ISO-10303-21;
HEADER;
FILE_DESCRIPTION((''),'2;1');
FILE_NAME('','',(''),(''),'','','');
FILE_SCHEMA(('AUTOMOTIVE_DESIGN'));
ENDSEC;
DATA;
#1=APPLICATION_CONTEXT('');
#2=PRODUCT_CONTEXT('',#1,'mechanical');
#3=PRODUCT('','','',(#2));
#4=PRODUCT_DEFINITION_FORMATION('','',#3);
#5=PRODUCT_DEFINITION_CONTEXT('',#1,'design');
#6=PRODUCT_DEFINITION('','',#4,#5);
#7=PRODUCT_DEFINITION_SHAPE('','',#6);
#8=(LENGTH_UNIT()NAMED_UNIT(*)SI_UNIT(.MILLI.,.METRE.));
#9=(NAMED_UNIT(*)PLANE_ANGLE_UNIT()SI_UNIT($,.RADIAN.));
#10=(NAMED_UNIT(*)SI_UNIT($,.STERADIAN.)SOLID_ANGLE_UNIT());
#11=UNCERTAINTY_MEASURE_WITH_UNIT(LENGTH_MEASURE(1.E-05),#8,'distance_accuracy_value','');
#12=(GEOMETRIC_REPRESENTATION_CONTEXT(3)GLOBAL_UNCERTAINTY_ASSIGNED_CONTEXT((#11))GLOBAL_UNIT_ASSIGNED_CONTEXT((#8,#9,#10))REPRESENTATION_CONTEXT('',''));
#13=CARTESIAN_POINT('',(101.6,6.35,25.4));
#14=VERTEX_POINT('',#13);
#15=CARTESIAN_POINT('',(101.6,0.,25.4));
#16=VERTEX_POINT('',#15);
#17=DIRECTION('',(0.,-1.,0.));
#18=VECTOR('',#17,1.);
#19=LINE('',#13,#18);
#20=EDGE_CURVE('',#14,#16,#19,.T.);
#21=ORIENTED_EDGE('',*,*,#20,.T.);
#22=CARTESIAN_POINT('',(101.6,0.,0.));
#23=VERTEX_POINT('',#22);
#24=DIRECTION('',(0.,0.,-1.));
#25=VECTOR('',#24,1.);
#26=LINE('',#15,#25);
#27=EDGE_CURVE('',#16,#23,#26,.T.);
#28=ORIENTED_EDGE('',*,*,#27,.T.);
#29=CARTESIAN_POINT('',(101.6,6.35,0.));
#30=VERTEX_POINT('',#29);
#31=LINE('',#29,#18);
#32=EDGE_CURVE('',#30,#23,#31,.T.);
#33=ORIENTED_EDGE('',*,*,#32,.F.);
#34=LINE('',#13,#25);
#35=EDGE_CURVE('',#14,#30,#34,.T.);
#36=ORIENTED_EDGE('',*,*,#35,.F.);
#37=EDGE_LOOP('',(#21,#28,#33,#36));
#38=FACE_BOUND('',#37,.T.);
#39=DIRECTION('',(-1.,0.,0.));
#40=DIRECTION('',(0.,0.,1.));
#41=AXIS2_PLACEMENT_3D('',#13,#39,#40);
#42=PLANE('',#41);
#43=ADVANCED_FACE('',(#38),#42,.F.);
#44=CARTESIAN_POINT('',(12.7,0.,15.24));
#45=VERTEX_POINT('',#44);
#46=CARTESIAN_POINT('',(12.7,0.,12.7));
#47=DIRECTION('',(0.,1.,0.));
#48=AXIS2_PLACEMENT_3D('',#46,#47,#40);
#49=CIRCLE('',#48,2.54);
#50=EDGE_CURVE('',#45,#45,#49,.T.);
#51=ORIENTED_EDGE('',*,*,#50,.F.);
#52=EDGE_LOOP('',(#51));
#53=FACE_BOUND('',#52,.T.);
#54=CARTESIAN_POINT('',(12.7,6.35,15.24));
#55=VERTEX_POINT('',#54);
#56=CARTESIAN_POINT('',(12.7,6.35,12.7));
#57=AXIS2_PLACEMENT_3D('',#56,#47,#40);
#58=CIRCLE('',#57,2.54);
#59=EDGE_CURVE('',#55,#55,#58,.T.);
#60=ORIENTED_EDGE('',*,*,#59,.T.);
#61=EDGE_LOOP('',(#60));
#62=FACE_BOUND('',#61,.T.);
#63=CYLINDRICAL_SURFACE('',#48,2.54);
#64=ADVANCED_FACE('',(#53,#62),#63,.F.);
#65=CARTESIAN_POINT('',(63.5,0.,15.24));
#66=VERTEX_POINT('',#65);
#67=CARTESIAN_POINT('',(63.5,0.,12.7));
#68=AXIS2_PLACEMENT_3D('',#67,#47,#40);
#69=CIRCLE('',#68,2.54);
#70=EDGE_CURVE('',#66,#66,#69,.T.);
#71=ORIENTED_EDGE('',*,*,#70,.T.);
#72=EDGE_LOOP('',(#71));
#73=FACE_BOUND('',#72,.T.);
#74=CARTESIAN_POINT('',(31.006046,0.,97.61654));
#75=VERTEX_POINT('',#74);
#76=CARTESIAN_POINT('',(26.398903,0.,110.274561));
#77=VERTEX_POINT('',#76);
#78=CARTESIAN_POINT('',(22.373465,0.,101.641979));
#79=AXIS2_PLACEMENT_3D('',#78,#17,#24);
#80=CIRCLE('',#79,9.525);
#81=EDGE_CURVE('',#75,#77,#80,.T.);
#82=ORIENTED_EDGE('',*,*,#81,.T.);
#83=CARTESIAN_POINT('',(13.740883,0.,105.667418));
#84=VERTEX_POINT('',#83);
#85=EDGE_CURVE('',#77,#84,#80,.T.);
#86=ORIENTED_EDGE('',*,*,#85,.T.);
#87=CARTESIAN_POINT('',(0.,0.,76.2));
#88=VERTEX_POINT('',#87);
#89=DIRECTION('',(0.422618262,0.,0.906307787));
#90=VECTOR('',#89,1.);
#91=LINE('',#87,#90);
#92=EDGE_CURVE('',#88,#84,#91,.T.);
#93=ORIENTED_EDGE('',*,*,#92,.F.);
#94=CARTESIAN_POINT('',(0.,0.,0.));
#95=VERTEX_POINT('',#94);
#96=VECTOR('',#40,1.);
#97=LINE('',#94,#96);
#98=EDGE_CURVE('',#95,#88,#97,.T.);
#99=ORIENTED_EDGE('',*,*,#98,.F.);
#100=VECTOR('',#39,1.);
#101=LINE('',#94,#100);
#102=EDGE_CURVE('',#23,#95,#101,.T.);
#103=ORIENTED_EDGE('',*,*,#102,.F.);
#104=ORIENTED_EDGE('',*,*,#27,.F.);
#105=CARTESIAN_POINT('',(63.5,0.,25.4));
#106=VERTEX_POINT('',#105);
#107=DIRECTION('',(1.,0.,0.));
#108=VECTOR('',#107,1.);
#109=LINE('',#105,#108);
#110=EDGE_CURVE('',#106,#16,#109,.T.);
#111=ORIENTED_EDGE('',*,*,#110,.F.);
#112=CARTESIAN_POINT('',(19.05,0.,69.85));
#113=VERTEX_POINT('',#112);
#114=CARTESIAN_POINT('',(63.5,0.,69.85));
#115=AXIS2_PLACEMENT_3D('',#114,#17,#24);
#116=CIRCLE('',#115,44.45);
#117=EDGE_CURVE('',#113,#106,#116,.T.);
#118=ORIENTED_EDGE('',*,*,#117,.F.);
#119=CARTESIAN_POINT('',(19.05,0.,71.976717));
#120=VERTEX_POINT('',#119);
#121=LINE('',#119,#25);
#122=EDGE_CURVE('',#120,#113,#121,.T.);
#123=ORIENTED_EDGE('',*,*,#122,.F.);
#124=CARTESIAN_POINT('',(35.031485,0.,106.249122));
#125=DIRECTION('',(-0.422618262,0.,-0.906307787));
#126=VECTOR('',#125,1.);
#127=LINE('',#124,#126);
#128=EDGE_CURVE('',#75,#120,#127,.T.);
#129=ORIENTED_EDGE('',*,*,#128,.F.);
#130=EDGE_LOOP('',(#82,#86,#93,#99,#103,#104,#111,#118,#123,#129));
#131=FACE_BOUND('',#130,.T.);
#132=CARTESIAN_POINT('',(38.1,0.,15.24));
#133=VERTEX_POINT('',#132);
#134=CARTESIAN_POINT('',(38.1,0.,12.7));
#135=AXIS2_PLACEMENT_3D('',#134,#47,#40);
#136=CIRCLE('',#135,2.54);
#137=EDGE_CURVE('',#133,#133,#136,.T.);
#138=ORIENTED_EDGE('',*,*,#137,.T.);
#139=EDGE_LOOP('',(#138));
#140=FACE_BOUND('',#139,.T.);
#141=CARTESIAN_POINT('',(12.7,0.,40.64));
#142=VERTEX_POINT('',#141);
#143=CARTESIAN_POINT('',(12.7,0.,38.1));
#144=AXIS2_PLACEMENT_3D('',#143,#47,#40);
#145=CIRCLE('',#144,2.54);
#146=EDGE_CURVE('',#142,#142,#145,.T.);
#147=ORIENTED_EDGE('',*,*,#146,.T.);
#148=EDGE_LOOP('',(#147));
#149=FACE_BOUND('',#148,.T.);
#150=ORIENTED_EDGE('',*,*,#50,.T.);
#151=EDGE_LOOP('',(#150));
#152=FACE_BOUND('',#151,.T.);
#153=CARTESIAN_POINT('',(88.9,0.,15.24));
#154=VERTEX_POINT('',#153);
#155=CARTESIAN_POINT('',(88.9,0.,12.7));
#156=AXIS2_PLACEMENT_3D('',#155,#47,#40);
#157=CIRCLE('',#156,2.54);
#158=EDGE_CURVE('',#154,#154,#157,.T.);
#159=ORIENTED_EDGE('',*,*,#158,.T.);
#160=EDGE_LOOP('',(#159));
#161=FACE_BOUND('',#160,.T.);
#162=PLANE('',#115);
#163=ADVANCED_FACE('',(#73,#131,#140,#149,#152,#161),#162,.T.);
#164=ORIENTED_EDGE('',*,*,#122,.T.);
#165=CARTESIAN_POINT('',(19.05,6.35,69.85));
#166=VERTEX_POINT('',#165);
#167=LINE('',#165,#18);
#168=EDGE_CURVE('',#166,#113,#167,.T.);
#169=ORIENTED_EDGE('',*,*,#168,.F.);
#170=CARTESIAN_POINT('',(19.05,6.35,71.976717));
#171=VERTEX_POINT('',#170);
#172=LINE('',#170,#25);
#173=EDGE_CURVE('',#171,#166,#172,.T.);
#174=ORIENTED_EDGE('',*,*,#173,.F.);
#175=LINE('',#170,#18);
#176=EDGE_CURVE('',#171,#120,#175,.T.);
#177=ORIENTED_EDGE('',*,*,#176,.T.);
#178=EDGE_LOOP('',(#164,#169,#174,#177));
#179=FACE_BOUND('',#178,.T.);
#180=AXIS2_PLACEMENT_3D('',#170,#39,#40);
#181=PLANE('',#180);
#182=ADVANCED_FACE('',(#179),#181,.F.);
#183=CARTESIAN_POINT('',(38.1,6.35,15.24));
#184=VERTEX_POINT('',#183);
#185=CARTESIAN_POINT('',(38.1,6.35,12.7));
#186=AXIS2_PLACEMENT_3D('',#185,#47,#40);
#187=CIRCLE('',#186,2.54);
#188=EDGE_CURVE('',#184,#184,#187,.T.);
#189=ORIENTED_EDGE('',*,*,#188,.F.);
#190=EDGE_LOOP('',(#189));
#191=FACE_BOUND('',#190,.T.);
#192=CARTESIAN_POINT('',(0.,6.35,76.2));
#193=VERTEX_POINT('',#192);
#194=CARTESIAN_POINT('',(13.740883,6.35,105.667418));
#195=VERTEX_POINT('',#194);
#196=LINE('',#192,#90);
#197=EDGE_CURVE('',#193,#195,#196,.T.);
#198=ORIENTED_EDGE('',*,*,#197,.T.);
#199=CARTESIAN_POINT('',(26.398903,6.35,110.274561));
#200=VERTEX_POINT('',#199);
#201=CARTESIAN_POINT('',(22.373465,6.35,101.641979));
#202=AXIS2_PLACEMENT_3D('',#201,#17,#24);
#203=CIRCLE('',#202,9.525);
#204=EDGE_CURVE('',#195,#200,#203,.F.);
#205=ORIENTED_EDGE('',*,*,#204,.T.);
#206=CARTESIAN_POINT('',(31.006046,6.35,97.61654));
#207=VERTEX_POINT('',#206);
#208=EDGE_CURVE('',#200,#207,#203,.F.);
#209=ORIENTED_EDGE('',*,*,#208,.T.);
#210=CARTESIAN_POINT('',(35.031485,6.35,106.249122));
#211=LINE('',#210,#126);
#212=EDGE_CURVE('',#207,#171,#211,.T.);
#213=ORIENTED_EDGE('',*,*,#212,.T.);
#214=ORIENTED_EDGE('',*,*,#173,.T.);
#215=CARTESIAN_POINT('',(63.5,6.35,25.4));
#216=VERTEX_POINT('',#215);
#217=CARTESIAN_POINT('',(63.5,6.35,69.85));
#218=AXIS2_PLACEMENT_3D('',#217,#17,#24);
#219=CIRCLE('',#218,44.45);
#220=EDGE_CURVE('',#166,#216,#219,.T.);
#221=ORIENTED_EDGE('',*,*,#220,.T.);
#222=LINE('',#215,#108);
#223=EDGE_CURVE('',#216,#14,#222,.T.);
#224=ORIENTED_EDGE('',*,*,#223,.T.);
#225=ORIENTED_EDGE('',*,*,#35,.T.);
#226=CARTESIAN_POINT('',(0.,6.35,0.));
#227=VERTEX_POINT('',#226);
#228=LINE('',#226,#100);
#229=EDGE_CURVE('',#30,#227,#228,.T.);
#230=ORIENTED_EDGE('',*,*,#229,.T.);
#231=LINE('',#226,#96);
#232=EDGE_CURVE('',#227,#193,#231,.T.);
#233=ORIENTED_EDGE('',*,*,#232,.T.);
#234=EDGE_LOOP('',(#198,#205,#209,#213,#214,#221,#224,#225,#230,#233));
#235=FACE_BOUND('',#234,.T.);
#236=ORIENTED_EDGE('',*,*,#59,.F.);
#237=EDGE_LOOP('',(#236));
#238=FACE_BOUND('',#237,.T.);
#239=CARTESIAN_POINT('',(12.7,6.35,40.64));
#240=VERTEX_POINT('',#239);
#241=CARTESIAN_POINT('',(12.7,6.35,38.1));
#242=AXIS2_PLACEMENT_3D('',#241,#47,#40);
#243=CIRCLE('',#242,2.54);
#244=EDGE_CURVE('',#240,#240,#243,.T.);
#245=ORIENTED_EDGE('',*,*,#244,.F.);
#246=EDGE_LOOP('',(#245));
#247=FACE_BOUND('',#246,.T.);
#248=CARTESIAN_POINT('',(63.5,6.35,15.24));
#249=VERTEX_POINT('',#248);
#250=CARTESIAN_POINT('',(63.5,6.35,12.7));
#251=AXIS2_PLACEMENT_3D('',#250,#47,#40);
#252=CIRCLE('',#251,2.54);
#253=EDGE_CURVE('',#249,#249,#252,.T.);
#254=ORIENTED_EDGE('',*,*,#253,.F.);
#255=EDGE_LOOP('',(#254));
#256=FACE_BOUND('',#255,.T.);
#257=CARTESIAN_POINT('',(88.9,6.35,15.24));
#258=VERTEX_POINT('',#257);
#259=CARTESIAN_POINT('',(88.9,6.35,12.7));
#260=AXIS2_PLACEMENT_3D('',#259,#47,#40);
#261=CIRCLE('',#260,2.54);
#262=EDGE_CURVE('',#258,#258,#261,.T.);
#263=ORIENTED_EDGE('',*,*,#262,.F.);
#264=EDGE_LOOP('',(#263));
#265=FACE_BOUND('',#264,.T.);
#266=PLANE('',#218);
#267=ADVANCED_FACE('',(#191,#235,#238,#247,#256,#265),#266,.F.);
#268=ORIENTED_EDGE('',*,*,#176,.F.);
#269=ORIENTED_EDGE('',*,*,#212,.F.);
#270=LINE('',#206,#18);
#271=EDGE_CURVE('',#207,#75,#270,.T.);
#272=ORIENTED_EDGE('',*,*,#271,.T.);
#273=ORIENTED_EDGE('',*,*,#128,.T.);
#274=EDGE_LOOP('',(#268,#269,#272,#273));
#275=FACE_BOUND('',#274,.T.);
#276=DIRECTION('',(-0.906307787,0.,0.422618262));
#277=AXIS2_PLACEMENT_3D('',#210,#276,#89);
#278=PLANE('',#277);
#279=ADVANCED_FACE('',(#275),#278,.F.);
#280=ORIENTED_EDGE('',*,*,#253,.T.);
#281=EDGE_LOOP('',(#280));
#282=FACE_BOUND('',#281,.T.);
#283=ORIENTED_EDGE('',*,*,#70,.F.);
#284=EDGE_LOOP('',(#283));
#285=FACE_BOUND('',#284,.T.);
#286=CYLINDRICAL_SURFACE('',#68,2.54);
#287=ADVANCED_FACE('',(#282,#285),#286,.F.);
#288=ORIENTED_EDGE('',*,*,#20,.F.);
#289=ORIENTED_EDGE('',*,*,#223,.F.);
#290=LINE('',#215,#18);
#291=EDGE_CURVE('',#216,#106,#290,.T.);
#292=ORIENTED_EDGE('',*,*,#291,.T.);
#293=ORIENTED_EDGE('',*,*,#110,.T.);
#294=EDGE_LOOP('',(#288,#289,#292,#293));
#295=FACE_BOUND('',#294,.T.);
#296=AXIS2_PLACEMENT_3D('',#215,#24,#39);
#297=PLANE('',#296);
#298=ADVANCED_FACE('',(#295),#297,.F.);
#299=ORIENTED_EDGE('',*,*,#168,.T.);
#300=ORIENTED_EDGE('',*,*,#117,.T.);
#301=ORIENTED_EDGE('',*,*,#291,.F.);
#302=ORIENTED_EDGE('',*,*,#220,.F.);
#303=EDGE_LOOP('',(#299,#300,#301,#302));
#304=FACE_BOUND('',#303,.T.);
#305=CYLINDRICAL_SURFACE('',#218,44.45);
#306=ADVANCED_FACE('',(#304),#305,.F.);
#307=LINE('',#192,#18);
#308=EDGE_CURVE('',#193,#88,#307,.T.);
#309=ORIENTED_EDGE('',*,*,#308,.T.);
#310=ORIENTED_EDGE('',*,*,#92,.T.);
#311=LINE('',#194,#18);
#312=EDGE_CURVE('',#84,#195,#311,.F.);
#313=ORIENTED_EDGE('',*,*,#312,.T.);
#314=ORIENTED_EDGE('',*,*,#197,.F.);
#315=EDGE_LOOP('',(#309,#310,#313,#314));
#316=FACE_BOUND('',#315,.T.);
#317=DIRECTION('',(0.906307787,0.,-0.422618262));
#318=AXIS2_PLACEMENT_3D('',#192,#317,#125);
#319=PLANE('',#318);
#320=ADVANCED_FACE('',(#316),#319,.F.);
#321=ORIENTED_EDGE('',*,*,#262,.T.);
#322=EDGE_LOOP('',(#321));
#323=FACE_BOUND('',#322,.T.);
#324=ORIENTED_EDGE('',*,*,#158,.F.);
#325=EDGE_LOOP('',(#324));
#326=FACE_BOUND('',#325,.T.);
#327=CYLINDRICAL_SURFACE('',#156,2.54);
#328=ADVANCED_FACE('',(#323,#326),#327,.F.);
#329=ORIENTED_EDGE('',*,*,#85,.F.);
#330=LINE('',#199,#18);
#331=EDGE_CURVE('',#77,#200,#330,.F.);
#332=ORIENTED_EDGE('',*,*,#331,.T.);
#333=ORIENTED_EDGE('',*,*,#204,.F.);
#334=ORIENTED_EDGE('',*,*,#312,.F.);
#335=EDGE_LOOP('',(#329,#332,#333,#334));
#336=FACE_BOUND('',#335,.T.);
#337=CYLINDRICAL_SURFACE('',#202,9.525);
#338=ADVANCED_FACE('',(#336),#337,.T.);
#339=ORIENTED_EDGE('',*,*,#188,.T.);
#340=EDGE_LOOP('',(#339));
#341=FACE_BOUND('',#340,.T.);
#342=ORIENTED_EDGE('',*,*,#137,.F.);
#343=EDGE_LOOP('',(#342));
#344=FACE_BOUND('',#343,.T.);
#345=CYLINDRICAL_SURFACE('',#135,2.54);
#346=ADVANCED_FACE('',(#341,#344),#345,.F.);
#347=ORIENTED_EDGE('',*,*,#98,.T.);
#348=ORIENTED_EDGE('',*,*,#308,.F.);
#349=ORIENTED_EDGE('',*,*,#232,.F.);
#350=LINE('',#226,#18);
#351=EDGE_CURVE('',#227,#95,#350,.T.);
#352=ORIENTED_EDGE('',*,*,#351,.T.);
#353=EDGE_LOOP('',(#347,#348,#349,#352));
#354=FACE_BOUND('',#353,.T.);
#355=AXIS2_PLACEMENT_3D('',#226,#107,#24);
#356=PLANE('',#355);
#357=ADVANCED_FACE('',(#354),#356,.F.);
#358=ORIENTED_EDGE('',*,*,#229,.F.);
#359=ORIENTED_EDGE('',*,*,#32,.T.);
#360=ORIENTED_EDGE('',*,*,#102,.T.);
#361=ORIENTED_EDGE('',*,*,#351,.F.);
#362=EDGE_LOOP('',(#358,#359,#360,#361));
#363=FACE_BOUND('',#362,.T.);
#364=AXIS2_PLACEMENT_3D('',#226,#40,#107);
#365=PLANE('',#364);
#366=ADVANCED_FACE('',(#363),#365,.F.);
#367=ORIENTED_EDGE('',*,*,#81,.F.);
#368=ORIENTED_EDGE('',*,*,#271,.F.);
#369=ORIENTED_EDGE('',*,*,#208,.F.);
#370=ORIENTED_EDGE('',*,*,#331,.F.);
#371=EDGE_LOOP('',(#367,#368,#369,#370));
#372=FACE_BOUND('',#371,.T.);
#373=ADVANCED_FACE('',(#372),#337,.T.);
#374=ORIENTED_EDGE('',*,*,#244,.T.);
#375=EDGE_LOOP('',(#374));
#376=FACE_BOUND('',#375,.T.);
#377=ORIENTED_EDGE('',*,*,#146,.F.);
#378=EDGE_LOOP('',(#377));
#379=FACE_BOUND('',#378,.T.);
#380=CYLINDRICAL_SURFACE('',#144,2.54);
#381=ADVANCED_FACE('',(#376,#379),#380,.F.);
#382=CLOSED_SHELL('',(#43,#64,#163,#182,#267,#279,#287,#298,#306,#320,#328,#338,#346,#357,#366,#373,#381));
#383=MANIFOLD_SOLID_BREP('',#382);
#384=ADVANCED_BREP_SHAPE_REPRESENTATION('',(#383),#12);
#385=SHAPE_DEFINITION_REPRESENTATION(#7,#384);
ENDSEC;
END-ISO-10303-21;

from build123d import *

# Parameters (mm, degrees)
BOSS_EXTRUDE1_DEPTH = 6.35
SKETCH2_R           = 2.54
CUT_EXTRUDE1_DEPTH  = 6.35
FILLET1_R           = 9.525


with BuildPart() as part:
    # Sketch1 → Boss-Extrude1 (new body)
    with BuildSketch(Plane(origin=(0, 0, 0), x_dir=(1, 0, 0), z_dir=(0, 1, 0))):
        with BuildLine():
            Line((0, 0), (0, -76.2))
            Line((0, -76.2), (17.766321776, -114.3))
            Line((17.766321776, -114.3), (35.031485119, -106.249122114))
            Line((35.031485119, -106.249122114), (19.05, -71.976716677))
            Line((19.05, -71.976716677), (19.05, -69.85))
            ThreePointArc((19.05, -69.85), (32.069103576, -38.419103576), (63.5, -25.4))
            Line((63.5, -25.4), (101.6, -25.4))
            Line((101.6, -25.4), (101.6, 0))
            Line((101.6, 0), (0, 0))
        make_face()
    extrude(amount=BOSS_EXTRUDE1_DEPTH)

    # Sketch2 → Cut-Extrude1 (cut)
    with BuildSketch(Plane(origin=(0, 6.35, 0), x_dir=(1, 0, 0), z_dir=(0, 1, 0))):
        with Locations(Location((12.7, -12.7, 0), (0, 0, 270))):
            Circle(SKETCH2_R)
        with Locations(Location((38.1, -12.7, 0), (0, 0, 270))):
            Circle(SKETCH2_R)
        with Locations(Location((63.5, -12.7, 0), (0, 0, 270))):
            Circle(SKETCH2_R)
        with Locations(Location((88.9, -12.7, 0), (0, 0, 270))):
            Circle(SKETCH2_R)
        with Locations((114.3, -12.7)):
            Circle(SKETCH2_R)
        with Locations((139.7, -12.7)):
            Circle(SKETCH2_R)
        with Locations(Location((12.7, -38.1, 0), (0, 0, 270))):
            Circle(SKETCH2_R)
    extrude(amount=-CUT_EXTRUDE1_DEPTH, mode=Mode.SUBTRACT)

    # Fillet1
    fillet1_edges = [part.edges().sort_by_distance(p)[0] for p in [
        (17.766321776, 3.175, 114.3),
        (35.031485119, 3.175, 106.249122114),
    ]]
    fillet(fillet1_edges, radius=FILLET1_R - 0.0001)  # a hair under: the kernel refuses the full size


solid = part.part
